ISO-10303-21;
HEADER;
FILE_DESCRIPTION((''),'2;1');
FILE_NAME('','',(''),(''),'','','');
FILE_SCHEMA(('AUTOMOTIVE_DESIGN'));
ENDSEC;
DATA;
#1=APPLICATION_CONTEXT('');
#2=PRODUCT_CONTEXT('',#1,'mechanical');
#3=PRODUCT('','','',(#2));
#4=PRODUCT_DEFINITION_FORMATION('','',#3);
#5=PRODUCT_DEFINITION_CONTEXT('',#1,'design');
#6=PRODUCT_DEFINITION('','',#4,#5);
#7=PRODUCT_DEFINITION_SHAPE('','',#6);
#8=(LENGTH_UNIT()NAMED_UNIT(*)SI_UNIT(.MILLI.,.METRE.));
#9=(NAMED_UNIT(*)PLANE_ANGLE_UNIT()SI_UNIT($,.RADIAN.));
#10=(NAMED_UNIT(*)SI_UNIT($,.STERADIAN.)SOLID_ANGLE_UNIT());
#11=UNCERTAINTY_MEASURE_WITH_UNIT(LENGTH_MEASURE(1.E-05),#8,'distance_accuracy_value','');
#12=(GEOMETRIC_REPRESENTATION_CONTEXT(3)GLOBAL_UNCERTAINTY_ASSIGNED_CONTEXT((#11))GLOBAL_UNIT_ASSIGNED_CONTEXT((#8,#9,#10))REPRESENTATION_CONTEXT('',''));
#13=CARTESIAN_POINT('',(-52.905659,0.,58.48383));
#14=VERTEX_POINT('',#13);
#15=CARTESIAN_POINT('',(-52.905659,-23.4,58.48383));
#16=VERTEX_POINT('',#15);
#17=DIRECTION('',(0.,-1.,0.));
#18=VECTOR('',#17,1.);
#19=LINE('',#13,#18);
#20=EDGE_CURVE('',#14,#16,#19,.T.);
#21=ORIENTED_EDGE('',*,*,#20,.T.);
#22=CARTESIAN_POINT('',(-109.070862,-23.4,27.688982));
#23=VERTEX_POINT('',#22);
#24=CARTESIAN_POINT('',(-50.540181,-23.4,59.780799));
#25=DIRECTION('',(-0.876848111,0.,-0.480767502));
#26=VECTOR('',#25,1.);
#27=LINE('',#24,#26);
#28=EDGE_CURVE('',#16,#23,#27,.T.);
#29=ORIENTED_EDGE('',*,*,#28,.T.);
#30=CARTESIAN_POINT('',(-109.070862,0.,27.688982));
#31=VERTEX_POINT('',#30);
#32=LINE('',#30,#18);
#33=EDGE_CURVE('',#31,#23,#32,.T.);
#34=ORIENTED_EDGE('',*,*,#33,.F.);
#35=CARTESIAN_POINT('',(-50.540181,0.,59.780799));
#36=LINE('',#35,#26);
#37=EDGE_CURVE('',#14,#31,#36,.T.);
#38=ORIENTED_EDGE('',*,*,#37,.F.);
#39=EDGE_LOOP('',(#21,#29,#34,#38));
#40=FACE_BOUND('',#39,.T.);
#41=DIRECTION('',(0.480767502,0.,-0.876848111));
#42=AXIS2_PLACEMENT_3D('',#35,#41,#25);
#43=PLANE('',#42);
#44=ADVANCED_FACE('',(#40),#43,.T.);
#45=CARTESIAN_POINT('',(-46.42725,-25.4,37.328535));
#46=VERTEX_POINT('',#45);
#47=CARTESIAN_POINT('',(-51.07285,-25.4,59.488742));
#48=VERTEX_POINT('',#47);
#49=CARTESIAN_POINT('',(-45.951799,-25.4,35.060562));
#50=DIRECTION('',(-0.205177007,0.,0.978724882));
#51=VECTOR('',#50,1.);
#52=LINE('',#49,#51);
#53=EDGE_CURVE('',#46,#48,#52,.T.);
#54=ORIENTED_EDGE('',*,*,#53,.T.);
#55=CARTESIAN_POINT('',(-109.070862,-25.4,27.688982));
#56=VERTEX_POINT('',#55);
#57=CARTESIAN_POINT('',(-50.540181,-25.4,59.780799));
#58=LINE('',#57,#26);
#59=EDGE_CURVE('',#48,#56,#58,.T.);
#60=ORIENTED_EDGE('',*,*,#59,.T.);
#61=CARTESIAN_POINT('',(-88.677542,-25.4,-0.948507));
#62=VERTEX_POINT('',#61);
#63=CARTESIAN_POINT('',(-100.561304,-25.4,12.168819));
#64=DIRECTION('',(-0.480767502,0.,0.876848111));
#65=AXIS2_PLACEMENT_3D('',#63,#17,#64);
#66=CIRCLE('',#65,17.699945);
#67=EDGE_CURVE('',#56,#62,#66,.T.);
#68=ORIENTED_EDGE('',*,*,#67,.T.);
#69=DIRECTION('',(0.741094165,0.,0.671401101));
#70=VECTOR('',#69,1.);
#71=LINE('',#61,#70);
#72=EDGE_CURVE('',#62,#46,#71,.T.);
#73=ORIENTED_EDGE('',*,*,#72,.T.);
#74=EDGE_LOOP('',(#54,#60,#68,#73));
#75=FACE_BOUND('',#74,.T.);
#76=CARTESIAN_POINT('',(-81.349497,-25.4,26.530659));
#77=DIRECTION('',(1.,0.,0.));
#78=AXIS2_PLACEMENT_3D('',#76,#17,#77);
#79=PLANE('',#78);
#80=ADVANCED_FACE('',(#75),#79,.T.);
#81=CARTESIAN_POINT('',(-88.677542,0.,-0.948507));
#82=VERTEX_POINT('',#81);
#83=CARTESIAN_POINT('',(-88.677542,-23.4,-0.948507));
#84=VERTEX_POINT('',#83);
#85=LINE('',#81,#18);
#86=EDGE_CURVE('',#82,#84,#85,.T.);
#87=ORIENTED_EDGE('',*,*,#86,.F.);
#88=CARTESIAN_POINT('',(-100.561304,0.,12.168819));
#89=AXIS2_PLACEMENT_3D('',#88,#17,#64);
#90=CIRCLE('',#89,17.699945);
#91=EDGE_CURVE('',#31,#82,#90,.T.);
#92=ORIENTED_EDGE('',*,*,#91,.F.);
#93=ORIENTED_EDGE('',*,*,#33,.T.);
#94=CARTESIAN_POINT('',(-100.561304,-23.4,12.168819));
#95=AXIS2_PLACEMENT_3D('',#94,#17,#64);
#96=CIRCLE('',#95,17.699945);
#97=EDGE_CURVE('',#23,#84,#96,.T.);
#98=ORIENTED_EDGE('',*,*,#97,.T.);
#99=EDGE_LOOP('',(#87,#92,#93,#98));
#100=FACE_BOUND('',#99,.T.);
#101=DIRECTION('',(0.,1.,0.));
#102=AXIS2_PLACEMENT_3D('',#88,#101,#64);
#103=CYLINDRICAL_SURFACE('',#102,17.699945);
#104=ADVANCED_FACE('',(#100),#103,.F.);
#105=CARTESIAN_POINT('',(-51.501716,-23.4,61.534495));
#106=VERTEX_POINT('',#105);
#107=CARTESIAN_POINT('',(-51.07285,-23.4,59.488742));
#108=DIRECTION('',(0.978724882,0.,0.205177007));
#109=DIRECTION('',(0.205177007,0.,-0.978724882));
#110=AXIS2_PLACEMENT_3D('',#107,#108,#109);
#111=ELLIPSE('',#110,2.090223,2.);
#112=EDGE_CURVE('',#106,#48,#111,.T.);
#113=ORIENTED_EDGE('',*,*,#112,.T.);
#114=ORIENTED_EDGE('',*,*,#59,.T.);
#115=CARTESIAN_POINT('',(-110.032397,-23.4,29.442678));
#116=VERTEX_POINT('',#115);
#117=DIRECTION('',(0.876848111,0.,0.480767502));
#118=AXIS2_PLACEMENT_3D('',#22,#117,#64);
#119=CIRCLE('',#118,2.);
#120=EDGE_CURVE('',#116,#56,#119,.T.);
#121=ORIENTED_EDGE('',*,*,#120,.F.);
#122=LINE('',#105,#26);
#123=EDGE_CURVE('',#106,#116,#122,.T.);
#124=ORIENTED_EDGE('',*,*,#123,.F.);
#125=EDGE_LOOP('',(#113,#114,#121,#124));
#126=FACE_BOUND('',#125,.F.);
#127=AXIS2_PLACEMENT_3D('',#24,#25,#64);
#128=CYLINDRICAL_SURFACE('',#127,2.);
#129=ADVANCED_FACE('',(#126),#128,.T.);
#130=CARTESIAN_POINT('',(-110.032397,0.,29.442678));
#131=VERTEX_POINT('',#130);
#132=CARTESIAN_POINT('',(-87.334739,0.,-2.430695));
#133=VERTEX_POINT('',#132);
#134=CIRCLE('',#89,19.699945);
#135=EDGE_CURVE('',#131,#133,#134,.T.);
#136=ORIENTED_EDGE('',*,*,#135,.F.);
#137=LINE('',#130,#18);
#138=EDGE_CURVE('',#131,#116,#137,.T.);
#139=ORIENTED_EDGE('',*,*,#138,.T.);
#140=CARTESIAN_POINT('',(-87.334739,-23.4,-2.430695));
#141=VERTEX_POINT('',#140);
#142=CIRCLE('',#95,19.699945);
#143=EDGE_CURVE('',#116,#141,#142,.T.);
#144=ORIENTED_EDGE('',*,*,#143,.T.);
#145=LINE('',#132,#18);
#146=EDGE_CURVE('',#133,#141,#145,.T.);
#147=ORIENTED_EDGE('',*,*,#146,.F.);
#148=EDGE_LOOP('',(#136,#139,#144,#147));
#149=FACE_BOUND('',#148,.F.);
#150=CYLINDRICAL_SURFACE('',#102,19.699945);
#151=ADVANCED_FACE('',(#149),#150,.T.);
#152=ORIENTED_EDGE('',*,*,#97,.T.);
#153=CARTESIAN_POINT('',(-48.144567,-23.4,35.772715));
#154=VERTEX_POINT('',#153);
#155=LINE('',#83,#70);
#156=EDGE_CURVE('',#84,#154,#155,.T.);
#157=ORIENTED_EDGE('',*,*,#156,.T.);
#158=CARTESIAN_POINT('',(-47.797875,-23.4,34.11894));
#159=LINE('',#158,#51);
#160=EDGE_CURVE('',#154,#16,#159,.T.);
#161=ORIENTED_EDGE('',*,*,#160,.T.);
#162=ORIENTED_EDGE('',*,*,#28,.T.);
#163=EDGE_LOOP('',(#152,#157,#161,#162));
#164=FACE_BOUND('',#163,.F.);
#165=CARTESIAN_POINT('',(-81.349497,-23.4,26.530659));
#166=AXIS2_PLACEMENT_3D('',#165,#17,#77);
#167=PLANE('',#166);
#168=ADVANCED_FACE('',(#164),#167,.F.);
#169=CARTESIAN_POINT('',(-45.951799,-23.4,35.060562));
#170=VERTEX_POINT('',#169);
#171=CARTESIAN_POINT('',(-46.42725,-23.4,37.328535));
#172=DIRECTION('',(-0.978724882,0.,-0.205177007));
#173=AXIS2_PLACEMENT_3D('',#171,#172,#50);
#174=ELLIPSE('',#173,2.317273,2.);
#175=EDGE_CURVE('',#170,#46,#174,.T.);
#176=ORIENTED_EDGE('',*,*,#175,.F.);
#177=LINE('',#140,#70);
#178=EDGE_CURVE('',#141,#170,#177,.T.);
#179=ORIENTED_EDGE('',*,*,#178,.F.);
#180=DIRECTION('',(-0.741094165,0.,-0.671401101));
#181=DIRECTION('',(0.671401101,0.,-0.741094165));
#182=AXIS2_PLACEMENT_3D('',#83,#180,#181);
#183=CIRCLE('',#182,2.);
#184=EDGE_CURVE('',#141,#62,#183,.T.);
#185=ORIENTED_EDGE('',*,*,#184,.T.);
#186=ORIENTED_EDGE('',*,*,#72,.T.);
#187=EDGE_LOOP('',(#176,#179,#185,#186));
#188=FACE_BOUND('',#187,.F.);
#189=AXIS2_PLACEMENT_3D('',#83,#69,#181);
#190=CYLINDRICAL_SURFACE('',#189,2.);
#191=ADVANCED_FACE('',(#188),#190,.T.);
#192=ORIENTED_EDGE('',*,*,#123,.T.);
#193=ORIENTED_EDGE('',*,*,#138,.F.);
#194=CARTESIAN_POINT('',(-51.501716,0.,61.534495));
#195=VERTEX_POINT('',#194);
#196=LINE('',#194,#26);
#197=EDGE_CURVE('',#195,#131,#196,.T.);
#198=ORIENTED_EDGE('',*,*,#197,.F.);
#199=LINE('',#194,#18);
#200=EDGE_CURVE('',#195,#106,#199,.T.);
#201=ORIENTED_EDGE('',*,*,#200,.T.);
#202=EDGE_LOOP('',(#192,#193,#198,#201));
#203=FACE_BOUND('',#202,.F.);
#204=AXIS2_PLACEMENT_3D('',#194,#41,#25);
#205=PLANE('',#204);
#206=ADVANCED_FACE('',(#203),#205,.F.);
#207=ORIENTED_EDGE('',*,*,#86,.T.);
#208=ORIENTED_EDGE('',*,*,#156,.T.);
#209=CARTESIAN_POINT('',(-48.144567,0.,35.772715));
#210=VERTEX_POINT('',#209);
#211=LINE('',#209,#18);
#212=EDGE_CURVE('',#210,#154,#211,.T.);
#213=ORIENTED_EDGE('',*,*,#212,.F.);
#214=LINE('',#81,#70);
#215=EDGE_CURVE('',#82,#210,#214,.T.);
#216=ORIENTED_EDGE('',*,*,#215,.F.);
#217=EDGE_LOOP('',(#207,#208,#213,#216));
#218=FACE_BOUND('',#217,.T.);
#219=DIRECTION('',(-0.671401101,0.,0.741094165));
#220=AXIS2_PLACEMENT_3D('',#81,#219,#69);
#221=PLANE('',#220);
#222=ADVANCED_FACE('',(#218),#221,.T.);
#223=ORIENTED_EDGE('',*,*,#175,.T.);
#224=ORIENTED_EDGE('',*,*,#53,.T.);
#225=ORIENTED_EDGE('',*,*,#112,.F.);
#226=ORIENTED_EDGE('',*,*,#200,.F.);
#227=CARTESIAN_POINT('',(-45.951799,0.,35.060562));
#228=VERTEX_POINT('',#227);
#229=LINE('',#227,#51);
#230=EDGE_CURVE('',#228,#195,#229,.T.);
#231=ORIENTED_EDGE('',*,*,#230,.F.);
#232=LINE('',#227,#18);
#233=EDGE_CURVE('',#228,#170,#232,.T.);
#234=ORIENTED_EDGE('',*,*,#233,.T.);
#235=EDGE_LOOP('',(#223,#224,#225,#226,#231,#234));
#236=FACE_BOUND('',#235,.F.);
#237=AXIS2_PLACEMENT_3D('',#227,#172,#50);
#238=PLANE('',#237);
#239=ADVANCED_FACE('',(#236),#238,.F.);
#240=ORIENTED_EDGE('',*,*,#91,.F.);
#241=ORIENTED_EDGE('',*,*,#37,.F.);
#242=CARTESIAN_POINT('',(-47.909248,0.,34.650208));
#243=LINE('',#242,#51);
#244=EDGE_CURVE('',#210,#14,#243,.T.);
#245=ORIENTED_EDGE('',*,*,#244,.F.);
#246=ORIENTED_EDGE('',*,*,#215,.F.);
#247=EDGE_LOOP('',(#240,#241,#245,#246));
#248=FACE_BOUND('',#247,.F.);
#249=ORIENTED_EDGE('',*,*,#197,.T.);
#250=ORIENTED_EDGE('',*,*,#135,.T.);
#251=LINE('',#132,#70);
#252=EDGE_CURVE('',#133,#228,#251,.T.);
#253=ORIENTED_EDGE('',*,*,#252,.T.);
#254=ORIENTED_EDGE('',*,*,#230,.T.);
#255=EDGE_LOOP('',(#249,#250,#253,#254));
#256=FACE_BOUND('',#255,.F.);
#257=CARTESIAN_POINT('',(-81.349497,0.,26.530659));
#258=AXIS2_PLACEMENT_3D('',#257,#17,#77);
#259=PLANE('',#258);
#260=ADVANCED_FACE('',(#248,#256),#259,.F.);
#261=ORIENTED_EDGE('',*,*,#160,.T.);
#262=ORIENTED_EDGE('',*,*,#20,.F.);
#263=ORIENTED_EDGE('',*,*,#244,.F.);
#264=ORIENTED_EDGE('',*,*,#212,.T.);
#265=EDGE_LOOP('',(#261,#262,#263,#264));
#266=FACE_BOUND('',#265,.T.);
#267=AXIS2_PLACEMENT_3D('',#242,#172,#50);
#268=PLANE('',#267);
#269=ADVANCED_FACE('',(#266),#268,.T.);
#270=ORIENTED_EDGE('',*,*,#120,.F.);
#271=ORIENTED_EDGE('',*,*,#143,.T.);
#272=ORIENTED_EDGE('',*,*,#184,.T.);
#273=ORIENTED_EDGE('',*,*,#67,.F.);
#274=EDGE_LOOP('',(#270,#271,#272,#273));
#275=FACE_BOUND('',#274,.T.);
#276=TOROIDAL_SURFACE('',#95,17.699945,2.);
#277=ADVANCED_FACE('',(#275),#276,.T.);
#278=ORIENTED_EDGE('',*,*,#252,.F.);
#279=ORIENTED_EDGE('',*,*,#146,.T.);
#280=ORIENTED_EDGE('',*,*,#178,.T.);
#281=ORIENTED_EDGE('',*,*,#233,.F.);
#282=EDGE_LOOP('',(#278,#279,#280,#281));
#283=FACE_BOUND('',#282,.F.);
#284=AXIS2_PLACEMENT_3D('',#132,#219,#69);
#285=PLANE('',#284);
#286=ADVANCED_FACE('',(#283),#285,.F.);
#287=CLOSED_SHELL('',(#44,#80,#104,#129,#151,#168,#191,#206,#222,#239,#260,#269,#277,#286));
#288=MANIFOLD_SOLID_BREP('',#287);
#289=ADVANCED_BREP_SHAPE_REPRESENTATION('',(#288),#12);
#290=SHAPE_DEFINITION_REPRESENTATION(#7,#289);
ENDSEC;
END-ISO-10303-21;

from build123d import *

# Parameters (mm, degrees)
F1_DEPTH = 25.4
F2_R     = 2
F3_T     = 2


# Not quite as in the source:
# - a shell that OpenCascade refuses in one call is made with other operations: the cavity is built on its own and cut out


with BuildPart() as f1:
    # F0 (on Front) → F1 (new body)
    with BuildSketch(Plane.XZ):
        with BuildLine():
            Line((-51.5017161099, 61.5344954622), (-110.0323972047, 29.4426782099))
            ThreePointArc((-110.0323972047, 29.4426782099), (-116.6082312435, 0.741485542), (-87.3347394228, -2.4306951723))
            Line((-87.3347394228, -2.4306951723), (-45.9517985582, 35.0605621934))
            Line((-45.9517985582, 35.0605621934), (-51.5017161099, 61.5344954622))
        make_face()
    extrude(amount=F1_DEPTH)

    # F2
    f2_edges = [f1.edges().sort_by_distance(p)[0] for p in [
        (-80.767057, -25.4, 45.488587),
    ]]
    fillet(f2_edges, radius=F2_R)

    # F3: shell of thickness 2, made by hand


with BuildPart() as f3_core1:
    # F3_t2: copy of F1
    add(f1.part)

    # the walls: a layer under each face that stays
    f3_faces = [f3_core1.faces().sort_by_distance(p)[0] for p in [
        (-66.6432689905, -11.7, 16.3149335105),
        (-116.6082312435, -11.7, 0.741485542),
        (-48.7267573341, -12.7, 48.2975288278),
        (-80.7670566573, -11.7, 45.488586836),
        (-82.3442492315, -25.4, 26.9788079772),
    ]]
    thicken(f3_faces, amount=-F3_T, mode=Mode.SUBTRACT)


with BuildPart() as f1_1:
    add(f1.part)

    # what is left inside the walls is the cavity
    f3_cavity = [f3_core1.part.solids().sort_by_distance(p)[0] for p in [
        (-83.202908, -0.02, 15.807193),
    ]]
    add(f3_cavity, mode=Mode.SUBTRACT)


solid = f1_1.part
